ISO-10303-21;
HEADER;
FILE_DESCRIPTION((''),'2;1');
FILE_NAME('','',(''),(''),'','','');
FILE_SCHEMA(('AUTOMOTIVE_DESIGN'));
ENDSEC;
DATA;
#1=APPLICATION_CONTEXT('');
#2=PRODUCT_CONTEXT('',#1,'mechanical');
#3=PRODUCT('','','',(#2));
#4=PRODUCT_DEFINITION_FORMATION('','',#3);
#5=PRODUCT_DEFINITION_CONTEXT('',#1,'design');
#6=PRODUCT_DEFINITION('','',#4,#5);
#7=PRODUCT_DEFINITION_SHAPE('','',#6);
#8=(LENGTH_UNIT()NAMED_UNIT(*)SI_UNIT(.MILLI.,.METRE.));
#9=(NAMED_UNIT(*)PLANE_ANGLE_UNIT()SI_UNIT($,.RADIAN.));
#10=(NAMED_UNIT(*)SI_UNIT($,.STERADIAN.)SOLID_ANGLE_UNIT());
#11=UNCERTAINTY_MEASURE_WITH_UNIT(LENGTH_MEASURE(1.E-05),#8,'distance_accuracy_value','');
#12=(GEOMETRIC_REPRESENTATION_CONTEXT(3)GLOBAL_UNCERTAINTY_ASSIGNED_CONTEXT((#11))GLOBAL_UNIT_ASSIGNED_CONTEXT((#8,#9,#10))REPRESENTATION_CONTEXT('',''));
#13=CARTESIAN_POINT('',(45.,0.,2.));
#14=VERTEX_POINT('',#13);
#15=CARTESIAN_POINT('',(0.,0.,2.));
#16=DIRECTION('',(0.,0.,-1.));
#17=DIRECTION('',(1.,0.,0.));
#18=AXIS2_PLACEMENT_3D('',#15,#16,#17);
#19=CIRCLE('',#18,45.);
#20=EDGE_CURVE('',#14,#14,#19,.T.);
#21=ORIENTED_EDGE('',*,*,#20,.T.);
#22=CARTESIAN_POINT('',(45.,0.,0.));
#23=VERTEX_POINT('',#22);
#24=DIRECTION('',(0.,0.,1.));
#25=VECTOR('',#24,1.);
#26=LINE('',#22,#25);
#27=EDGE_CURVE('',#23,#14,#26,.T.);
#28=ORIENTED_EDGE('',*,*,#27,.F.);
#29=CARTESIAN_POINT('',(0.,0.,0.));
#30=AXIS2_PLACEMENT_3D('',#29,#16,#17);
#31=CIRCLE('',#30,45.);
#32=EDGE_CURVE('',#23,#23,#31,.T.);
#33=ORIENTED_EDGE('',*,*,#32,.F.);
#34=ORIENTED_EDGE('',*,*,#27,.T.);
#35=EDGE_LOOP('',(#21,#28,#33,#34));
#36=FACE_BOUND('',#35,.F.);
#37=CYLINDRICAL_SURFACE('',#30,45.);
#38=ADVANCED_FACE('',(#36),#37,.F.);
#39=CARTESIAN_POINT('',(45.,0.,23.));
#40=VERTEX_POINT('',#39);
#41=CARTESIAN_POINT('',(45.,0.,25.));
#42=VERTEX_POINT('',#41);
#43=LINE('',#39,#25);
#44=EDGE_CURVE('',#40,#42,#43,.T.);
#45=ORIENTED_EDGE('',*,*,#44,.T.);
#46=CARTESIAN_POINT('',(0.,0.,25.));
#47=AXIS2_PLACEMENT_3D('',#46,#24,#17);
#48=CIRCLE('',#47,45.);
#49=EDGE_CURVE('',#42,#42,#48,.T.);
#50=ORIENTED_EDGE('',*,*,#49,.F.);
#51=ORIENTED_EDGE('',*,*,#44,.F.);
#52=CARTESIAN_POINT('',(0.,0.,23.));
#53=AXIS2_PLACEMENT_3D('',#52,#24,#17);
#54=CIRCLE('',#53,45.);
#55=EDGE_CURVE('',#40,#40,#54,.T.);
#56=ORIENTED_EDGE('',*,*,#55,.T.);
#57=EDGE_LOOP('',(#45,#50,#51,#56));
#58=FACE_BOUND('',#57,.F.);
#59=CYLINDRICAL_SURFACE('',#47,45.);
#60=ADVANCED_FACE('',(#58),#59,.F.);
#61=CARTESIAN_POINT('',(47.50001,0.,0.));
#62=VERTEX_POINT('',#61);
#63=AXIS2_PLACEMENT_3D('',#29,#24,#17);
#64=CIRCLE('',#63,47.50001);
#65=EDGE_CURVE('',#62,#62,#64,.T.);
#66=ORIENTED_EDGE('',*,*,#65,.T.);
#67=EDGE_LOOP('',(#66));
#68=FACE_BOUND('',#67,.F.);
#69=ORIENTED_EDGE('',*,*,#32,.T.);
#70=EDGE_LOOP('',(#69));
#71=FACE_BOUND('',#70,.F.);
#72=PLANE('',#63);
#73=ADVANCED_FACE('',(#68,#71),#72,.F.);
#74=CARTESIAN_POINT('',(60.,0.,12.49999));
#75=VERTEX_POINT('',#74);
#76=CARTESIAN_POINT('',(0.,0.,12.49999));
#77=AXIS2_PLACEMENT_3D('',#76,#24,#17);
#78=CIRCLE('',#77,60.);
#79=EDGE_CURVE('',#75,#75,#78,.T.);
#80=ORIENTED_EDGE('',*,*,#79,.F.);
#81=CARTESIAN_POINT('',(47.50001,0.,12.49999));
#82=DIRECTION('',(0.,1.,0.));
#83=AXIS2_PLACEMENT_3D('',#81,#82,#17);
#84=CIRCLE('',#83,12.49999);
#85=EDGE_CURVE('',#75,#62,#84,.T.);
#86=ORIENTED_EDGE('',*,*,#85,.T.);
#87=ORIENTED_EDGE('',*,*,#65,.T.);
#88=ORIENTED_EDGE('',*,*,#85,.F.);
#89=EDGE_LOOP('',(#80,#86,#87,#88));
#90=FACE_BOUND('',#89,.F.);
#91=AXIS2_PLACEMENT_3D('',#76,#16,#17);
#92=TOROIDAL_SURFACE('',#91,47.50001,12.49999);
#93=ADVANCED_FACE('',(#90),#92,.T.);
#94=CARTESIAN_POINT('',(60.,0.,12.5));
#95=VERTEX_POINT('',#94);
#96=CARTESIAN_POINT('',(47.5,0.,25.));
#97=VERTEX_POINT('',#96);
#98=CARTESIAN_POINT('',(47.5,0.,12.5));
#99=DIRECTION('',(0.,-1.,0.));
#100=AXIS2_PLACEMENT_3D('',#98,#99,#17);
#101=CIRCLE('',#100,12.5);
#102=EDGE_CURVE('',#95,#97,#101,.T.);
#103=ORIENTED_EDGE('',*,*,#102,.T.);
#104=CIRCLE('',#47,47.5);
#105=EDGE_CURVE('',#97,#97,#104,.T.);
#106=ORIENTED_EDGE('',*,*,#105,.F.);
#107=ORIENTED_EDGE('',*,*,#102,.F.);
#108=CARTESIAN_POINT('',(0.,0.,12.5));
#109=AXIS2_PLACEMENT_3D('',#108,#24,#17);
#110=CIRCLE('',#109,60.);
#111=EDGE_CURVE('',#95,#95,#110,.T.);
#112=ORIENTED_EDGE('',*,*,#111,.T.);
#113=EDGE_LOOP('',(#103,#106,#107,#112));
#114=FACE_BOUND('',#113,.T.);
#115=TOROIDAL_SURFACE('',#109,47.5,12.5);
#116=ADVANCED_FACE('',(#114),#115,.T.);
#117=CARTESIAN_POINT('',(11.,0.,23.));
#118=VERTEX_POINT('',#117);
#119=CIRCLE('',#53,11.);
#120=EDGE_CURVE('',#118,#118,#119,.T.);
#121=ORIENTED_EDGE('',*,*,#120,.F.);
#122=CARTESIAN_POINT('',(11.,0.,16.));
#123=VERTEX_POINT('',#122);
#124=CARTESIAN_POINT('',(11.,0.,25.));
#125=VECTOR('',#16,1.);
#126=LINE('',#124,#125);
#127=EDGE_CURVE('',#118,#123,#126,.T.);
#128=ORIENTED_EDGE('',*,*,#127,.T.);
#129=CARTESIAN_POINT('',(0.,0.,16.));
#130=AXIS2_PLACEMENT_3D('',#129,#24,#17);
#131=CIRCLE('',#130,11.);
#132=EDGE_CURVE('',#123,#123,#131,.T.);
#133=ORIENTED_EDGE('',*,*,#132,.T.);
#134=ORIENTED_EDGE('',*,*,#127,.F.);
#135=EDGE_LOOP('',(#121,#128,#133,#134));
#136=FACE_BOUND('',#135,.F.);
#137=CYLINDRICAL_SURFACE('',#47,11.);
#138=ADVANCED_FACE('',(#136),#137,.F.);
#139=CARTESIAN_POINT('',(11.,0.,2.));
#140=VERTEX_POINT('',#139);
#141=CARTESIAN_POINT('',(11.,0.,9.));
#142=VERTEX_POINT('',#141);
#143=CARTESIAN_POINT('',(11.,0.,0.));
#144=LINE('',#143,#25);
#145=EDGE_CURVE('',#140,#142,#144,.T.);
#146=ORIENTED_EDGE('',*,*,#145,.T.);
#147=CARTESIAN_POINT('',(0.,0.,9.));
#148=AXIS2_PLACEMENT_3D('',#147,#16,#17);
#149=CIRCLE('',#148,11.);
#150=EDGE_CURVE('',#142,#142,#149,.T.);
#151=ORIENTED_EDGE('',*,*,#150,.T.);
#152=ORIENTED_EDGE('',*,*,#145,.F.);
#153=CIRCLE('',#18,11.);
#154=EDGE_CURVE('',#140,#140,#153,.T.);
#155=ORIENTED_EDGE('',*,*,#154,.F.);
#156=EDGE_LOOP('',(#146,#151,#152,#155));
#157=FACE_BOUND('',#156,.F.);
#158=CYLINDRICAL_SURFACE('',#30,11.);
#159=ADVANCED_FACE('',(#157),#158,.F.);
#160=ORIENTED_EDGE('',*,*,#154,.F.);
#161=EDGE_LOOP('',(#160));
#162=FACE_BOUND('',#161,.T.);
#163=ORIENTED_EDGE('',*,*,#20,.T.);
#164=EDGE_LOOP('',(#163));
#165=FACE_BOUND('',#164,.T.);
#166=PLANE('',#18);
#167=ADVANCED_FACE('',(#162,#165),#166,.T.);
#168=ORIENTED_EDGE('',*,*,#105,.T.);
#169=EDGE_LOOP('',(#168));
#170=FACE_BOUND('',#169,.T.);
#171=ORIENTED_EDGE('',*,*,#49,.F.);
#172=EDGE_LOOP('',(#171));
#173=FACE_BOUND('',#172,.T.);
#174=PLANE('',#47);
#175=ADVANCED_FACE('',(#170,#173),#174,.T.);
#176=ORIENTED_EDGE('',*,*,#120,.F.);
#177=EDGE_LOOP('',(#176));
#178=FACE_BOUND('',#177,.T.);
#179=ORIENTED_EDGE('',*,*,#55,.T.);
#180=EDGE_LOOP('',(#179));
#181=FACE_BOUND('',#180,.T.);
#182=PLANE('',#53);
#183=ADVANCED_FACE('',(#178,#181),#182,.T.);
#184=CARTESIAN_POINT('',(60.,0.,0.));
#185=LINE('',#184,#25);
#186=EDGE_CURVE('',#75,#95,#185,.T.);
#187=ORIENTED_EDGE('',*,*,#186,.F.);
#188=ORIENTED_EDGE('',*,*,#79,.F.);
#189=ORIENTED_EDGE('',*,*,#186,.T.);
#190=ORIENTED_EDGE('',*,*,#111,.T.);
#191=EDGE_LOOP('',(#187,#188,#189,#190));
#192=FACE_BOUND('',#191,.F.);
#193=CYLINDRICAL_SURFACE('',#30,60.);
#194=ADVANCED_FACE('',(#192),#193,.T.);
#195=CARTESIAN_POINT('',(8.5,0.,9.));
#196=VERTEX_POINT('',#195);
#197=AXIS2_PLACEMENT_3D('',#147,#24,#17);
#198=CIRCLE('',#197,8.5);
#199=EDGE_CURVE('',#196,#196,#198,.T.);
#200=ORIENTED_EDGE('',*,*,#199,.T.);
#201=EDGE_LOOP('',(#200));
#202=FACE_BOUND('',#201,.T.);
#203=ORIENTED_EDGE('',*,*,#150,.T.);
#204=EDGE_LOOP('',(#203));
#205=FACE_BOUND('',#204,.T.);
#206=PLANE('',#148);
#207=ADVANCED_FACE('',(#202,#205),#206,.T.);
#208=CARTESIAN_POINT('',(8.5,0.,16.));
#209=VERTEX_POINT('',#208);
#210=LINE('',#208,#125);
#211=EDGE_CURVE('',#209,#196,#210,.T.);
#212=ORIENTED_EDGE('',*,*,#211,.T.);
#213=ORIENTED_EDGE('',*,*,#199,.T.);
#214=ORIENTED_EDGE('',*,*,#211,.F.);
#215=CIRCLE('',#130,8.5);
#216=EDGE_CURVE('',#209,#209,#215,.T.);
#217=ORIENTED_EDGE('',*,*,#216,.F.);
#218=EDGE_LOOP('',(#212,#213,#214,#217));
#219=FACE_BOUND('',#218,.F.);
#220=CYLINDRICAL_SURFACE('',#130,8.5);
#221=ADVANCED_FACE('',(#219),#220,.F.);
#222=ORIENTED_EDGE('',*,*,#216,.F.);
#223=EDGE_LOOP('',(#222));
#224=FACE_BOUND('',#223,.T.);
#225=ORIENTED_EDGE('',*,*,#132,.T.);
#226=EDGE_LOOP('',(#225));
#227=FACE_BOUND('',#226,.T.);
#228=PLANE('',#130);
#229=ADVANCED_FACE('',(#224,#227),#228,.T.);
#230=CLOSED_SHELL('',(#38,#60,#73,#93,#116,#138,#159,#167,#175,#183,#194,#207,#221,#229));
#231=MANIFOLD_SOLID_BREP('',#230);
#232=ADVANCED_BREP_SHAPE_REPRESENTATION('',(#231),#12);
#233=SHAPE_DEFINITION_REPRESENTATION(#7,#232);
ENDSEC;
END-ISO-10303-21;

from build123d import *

# Parameters (mm, degrees)
F0_R      = 60
F1_DEPTH  = 25
F2_R      = 11
F4_DEPTH  = 9
F3_R      = 45
F3_R_2    = 11
F5_DEPTH  = 0.01
F6_DEPTH  = 2
F7_R      = 11
F9_DEPTH  = 9
F8_R      = 45
F10_DEPTH = 2
F11_R     = 12.5
F12_R     = 12.49999
F13_R     = 8.5
F14_DEPTH = 25


# Not quite as in the source:
# - a fillet or chamfer is up to 0.001 mm smaller than in the source, because OpenCascade refuses the exact size


with BuildPart() as f1:
    # F0 (on Top) → F1 (new body)
    with BuildSketch(Plane.XY):
        Circle(F0_R)
    extrude(amount=F1_DEPTH)

    # F2 (on face) → F4 (cut)
    with BuildSketch(Plane.XY.offset(25)):
        Circle(F2_R)
    extrude(amount=-F4_DEPTH, mode=Mode.SUBTRACT)

    # F3 (on face) → F5 (cut)
    with BuildSketch(Plane.XY.offset(25)):
        Circle(F3_R)
        Circle(F3_R_2, mode=Mode.SUBTRACT)
    extrude(amount=-F5_DEPTH, mode=Mode.SUBTRACT)

    # F3 (on face) → F6 (cut)
    with BuildSketch(Plane.XY.offset(25)):
        Circle(F3_R)
    extrude(amount=-F6_DEPTH, mode=Mode.SUBTRACT)

    # F7 (on face) → F9 (cut)
    with BuildSketch(Plane(origin=(0, 0, 0), x_dir=(1, 0, 0), z_dir=(0, 0, -1))):
        Circle(F7_R)
    extrude(amount=-F9_DEPTH, mode=Mode.SUBTRACT)

    # F8 (on face) → F10 (cut)
    with BuildSketch(Plane(origin=(0, 0, 0), x_dir=(1, 0, 0), z_dir=(0, 0, -1))):
        Circle(F8_R)
    extrude(amount=-F10_DEPTH, mode=Mode.SUBTRACT)

    # F11
    f11_edges = [f1.edges().sort_by_distance(p)[0] for p in [
        (-60, 0, 25),
    ]]
    fillet(f11_edges, radius=F11_R)

    # F12 (radius 12.5 in the source; OpenCascade refuses exactly that, so slightly less here)
    f12_edges = [f1.edges().sort_by_distance(p)[0] for p in [
        (-60, 0, 0),
    ]]
    fillet(f12_edges, radius=F12_R)

    # F13 (on face) → F14 (cut)
    with BuildSketch(Plane.XY.offset(16)):
        Circle(F13_R)
    extrude(amount=-F14_DEPTH, mode=Mode.SUBTRACT)


solid = f1.part
